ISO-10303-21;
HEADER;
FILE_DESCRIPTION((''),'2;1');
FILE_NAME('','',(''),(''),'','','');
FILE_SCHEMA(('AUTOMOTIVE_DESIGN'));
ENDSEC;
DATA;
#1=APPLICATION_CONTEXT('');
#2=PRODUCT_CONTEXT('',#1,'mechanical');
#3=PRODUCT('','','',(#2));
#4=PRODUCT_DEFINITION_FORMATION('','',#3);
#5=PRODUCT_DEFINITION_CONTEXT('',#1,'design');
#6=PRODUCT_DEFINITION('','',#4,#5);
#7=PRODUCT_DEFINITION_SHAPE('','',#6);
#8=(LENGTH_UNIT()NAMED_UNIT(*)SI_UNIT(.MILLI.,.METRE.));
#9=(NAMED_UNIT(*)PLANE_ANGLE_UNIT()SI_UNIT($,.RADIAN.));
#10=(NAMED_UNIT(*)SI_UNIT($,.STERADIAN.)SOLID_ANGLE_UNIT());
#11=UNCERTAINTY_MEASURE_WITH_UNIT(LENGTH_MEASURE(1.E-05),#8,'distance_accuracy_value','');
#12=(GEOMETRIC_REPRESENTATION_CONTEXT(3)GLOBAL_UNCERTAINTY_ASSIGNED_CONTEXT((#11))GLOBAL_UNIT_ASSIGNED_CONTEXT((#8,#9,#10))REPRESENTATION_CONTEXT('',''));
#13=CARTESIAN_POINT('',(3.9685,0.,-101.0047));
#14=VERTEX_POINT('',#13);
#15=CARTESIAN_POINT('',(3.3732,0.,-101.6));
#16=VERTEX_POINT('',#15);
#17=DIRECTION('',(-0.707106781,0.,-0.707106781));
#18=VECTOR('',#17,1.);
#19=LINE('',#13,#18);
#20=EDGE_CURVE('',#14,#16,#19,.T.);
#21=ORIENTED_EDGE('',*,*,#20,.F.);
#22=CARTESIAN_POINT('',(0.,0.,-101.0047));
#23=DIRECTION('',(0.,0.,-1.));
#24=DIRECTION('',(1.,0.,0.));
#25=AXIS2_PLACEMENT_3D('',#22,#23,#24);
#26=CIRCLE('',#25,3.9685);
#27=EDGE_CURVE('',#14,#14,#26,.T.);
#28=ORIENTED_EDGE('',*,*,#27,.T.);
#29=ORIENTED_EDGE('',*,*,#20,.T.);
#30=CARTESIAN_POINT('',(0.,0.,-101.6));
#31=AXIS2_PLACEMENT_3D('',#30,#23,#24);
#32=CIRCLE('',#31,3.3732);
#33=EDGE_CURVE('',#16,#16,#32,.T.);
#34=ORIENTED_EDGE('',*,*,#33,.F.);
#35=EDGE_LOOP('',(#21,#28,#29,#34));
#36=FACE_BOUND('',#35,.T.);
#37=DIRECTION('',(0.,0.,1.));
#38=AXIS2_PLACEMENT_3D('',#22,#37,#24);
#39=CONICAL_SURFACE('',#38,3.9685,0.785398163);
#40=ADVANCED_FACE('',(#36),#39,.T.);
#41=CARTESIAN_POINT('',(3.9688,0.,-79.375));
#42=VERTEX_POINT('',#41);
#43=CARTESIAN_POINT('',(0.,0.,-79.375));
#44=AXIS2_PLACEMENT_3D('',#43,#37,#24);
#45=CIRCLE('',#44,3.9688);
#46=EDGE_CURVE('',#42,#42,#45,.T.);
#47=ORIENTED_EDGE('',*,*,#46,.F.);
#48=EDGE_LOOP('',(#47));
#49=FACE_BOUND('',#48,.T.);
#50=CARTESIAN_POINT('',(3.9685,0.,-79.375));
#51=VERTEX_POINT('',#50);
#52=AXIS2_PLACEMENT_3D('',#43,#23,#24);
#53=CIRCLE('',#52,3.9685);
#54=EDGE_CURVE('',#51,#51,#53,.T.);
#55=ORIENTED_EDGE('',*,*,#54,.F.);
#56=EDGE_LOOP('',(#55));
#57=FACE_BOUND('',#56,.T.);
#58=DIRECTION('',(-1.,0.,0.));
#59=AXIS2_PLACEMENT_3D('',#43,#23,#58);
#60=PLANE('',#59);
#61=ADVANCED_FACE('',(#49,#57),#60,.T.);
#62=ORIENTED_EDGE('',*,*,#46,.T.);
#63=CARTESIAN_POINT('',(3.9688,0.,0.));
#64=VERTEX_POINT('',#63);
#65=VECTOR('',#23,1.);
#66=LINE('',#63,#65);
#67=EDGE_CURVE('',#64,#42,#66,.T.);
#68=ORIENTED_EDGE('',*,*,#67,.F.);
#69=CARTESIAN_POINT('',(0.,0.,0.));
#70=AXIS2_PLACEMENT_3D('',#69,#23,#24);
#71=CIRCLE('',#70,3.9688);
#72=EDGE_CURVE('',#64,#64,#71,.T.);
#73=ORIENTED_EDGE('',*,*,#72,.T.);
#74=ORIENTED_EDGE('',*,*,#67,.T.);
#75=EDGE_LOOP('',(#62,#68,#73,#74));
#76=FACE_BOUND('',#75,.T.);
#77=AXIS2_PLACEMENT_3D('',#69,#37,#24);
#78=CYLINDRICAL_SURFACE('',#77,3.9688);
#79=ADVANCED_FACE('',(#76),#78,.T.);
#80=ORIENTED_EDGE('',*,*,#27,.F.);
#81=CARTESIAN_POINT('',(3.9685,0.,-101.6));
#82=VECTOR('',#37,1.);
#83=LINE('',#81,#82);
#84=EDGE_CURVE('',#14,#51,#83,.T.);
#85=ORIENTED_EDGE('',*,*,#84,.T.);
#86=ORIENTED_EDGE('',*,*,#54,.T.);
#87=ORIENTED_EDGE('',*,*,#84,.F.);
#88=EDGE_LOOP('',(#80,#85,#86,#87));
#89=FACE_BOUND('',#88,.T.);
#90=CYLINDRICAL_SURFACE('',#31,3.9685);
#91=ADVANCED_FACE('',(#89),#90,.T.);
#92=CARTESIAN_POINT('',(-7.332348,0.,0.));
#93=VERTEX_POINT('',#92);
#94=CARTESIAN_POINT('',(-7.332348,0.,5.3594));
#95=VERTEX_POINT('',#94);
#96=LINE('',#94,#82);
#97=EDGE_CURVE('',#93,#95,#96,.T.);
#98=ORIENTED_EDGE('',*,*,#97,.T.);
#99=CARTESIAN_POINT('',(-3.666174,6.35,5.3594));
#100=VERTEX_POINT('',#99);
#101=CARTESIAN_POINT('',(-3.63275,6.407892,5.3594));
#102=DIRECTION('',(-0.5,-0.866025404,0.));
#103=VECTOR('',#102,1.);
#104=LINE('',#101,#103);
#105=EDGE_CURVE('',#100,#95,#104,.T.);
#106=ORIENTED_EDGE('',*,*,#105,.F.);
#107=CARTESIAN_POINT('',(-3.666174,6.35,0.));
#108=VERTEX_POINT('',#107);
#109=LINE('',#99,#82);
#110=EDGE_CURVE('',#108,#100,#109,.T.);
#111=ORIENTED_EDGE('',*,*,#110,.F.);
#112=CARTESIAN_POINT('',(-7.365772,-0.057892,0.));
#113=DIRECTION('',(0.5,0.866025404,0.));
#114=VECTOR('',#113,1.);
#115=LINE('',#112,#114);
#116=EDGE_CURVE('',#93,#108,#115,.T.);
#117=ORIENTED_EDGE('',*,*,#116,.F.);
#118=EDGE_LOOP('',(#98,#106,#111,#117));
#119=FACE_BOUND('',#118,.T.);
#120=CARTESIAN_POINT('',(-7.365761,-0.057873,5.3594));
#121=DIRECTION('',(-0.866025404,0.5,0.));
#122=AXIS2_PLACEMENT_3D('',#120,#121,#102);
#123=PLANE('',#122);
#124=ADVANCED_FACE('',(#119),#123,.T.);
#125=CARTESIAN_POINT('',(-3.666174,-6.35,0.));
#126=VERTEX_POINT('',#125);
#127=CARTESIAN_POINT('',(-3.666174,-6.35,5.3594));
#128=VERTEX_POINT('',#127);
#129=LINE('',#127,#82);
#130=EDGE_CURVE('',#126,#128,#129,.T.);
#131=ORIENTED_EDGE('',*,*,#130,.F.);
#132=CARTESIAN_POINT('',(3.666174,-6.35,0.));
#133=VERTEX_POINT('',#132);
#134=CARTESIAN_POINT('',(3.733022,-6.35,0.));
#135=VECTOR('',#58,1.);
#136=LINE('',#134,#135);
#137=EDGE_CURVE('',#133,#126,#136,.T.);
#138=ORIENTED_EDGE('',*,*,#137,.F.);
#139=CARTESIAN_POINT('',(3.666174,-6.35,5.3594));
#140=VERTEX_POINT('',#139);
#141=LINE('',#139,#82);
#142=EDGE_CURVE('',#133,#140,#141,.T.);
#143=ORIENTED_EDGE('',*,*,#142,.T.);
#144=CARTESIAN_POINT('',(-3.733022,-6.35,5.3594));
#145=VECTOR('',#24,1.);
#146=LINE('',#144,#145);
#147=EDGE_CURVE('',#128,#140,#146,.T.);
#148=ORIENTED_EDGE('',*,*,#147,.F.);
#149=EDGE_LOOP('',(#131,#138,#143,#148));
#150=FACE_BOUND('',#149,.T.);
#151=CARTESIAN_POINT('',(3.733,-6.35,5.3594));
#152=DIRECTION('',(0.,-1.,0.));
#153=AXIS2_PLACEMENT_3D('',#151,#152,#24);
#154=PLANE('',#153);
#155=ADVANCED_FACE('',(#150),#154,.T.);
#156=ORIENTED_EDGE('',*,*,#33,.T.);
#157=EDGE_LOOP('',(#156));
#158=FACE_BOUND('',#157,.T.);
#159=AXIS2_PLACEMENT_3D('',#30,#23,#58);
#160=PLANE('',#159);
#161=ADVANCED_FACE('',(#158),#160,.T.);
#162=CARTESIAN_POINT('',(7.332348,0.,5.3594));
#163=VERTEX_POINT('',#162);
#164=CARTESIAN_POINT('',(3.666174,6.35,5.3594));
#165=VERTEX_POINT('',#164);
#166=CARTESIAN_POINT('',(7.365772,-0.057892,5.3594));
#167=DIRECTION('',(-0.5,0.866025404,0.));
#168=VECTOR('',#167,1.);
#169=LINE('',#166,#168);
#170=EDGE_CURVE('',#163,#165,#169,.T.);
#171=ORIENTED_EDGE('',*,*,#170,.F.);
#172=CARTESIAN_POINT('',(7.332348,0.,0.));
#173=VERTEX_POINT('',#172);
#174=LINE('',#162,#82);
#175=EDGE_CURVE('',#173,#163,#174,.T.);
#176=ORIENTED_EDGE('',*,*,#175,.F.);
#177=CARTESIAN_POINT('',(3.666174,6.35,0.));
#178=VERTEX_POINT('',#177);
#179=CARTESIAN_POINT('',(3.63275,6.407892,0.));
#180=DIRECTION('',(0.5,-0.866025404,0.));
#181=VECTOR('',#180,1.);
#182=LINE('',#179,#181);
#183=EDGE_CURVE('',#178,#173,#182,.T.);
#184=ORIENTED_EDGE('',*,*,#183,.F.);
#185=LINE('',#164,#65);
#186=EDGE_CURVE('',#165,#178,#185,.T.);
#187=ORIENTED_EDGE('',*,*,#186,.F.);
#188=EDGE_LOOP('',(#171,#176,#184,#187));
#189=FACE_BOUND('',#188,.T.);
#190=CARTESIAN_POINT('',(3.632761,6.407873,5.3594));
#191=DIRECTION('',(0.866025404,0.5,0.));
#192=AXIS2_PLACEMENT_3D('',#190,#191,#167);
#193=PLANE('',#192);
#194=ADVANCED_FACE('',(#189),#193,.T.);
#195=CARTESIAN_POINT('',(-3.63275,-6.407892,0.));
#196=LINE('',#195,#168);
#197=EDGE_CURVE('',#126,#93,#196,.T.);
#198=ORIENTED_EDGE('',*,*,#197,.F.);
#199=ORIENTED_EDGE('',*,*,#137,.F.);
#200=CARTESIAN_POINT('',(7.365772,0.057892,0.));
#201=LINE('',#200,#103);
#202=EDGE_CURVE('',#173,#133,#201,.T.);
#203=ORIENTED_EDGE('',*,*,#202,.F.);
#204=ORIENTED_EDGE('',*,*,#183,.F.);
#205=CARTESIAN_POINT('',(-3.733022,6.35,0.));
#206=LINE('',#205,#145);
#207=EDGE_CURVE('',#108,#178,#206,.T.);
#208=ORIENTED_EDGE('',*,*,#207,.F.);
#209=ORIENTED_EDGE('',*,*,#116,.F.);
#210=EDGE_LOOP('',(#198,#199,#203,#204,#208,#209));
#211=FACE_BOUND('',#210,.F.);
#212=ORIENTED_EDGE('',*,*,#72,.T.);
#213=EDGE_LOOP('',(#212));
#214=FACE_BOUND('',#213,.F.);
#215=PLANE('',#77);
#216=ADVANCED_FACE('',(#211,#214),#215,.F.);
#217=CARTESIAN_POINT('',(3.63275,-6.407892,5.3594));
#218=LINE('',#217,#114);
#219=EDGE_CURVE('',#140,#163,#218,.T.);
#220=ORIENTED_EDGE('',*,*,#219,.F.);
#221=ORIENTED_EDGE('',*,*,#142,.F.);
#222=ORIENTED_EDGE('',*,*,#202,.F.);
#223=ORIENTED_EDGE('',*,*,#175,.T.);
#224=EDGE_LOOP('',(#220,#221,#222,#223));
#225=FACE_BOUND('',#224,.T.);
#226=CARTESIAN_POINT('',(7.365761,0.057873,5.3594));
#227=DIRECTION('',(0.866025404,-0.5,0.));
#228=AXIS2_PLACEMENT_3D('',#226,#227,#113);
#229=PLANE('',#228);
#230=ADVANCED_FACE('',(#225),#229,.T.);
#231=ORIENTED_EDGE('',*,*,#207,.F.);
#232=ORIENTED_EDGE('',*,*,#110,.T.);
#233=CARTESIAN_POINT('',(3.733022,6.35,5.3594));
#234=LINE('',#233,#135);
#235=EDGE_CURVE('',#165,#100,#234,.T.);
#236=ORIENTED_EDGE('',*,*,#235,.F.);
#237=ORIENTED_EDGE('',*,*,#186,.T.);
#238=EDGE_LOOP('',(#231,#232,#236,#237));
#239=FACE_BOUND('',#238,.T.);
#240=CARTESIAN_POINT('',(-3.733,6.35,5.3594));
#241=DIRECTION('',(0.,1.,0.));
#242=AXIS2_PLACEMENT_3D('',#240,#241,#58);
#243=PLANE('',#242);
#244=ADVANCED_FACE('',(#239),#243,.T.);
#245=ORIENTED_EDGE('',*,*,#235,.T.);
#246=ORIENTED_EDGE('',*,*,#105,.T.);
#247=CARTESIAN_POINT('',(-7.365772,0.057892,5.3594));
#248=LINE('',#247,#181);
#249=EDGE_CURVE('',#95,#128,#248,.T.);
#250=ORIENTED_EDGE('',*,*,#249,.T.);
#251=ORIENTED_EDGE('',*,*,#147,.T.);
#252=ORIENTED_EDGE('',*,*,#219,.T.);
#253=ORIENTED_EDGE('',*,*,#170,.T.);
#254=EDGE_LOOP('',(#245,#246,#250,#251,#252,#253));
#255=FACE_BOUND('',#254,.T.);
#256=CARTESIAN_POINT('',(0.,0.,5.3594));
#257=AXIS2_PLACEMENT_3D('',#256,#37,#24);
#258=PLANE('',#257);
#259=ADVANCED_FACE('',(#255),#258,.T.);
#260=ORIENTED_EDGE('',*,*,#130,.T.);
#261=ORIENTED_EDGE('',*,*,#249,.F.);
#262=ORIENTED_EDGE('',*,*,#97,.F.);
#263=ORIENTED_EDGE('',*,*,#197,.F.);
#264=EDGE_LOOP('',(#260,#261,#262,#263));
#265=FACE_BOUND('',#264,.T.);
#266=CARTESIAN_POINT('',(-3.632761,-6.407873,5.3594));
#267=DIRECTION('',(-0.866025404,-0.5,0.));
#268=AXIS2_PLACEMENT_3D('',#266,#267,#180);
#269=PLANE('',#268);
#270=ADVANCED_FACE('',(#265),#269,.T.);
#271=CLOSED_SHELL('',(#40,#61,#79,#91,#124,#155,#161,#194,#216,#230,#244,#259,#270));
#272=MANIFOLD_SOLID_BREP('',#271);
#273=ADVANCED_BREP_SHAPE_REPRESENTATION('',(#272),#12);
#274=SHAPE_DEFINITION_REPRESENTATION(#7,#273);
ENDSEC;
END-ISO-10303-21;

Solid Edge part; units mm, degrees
sketch "Sketch1" plane through (0, 0, 0) normal (0, 0, 1) x (1, 0, 0)
  circle A0 centre (0, 0) radius 7.366
  dimension "D1" = 14.732
extrude "Protrusion1" add sketch "Sketch1" along normal blind 5.3594
sketch "Sketch2" plane through (0, 0, 0) normal (0, 0, -1) x (1, 0, 0)
  circle A0 centre (0, 0) radius 3.9688
extrude "Protrusion2" add sketch "Sketch2" along normal blind 101.6
sketch "Sketch3" plane through (0, 0, -101.6) normal (0, 0, -1) x (1, 0, 0)
  circle A0 centre (0, 0) radius 3.9685
extrude "Cutout1" cut sketch "Sketch3" against normal blind 22.225 flip side to cut
chamfer "Chamfer_1" distance 0.5953 angle 45 1 edges at (-3.9685, 0, -101.6)
sketch "Sketch4" plane through (0, 0, 5.3594) normal (0, 0, 1) x (1, 0, 0)
  line L0 (-3.733, 6.35) -> (3.733, 6.35)
  dimension "D1" = 12.7
extrude "Cutout2" cut sketch "Sketch4" against normal up to next material side at (0, 6.4, 5.3594)
pattern_circular "Pattern1" count 6 over 360 about axis through (0, 0, 5.3594) along (0, 0, 1) of "Cutout2"
properties part number "24100075"
